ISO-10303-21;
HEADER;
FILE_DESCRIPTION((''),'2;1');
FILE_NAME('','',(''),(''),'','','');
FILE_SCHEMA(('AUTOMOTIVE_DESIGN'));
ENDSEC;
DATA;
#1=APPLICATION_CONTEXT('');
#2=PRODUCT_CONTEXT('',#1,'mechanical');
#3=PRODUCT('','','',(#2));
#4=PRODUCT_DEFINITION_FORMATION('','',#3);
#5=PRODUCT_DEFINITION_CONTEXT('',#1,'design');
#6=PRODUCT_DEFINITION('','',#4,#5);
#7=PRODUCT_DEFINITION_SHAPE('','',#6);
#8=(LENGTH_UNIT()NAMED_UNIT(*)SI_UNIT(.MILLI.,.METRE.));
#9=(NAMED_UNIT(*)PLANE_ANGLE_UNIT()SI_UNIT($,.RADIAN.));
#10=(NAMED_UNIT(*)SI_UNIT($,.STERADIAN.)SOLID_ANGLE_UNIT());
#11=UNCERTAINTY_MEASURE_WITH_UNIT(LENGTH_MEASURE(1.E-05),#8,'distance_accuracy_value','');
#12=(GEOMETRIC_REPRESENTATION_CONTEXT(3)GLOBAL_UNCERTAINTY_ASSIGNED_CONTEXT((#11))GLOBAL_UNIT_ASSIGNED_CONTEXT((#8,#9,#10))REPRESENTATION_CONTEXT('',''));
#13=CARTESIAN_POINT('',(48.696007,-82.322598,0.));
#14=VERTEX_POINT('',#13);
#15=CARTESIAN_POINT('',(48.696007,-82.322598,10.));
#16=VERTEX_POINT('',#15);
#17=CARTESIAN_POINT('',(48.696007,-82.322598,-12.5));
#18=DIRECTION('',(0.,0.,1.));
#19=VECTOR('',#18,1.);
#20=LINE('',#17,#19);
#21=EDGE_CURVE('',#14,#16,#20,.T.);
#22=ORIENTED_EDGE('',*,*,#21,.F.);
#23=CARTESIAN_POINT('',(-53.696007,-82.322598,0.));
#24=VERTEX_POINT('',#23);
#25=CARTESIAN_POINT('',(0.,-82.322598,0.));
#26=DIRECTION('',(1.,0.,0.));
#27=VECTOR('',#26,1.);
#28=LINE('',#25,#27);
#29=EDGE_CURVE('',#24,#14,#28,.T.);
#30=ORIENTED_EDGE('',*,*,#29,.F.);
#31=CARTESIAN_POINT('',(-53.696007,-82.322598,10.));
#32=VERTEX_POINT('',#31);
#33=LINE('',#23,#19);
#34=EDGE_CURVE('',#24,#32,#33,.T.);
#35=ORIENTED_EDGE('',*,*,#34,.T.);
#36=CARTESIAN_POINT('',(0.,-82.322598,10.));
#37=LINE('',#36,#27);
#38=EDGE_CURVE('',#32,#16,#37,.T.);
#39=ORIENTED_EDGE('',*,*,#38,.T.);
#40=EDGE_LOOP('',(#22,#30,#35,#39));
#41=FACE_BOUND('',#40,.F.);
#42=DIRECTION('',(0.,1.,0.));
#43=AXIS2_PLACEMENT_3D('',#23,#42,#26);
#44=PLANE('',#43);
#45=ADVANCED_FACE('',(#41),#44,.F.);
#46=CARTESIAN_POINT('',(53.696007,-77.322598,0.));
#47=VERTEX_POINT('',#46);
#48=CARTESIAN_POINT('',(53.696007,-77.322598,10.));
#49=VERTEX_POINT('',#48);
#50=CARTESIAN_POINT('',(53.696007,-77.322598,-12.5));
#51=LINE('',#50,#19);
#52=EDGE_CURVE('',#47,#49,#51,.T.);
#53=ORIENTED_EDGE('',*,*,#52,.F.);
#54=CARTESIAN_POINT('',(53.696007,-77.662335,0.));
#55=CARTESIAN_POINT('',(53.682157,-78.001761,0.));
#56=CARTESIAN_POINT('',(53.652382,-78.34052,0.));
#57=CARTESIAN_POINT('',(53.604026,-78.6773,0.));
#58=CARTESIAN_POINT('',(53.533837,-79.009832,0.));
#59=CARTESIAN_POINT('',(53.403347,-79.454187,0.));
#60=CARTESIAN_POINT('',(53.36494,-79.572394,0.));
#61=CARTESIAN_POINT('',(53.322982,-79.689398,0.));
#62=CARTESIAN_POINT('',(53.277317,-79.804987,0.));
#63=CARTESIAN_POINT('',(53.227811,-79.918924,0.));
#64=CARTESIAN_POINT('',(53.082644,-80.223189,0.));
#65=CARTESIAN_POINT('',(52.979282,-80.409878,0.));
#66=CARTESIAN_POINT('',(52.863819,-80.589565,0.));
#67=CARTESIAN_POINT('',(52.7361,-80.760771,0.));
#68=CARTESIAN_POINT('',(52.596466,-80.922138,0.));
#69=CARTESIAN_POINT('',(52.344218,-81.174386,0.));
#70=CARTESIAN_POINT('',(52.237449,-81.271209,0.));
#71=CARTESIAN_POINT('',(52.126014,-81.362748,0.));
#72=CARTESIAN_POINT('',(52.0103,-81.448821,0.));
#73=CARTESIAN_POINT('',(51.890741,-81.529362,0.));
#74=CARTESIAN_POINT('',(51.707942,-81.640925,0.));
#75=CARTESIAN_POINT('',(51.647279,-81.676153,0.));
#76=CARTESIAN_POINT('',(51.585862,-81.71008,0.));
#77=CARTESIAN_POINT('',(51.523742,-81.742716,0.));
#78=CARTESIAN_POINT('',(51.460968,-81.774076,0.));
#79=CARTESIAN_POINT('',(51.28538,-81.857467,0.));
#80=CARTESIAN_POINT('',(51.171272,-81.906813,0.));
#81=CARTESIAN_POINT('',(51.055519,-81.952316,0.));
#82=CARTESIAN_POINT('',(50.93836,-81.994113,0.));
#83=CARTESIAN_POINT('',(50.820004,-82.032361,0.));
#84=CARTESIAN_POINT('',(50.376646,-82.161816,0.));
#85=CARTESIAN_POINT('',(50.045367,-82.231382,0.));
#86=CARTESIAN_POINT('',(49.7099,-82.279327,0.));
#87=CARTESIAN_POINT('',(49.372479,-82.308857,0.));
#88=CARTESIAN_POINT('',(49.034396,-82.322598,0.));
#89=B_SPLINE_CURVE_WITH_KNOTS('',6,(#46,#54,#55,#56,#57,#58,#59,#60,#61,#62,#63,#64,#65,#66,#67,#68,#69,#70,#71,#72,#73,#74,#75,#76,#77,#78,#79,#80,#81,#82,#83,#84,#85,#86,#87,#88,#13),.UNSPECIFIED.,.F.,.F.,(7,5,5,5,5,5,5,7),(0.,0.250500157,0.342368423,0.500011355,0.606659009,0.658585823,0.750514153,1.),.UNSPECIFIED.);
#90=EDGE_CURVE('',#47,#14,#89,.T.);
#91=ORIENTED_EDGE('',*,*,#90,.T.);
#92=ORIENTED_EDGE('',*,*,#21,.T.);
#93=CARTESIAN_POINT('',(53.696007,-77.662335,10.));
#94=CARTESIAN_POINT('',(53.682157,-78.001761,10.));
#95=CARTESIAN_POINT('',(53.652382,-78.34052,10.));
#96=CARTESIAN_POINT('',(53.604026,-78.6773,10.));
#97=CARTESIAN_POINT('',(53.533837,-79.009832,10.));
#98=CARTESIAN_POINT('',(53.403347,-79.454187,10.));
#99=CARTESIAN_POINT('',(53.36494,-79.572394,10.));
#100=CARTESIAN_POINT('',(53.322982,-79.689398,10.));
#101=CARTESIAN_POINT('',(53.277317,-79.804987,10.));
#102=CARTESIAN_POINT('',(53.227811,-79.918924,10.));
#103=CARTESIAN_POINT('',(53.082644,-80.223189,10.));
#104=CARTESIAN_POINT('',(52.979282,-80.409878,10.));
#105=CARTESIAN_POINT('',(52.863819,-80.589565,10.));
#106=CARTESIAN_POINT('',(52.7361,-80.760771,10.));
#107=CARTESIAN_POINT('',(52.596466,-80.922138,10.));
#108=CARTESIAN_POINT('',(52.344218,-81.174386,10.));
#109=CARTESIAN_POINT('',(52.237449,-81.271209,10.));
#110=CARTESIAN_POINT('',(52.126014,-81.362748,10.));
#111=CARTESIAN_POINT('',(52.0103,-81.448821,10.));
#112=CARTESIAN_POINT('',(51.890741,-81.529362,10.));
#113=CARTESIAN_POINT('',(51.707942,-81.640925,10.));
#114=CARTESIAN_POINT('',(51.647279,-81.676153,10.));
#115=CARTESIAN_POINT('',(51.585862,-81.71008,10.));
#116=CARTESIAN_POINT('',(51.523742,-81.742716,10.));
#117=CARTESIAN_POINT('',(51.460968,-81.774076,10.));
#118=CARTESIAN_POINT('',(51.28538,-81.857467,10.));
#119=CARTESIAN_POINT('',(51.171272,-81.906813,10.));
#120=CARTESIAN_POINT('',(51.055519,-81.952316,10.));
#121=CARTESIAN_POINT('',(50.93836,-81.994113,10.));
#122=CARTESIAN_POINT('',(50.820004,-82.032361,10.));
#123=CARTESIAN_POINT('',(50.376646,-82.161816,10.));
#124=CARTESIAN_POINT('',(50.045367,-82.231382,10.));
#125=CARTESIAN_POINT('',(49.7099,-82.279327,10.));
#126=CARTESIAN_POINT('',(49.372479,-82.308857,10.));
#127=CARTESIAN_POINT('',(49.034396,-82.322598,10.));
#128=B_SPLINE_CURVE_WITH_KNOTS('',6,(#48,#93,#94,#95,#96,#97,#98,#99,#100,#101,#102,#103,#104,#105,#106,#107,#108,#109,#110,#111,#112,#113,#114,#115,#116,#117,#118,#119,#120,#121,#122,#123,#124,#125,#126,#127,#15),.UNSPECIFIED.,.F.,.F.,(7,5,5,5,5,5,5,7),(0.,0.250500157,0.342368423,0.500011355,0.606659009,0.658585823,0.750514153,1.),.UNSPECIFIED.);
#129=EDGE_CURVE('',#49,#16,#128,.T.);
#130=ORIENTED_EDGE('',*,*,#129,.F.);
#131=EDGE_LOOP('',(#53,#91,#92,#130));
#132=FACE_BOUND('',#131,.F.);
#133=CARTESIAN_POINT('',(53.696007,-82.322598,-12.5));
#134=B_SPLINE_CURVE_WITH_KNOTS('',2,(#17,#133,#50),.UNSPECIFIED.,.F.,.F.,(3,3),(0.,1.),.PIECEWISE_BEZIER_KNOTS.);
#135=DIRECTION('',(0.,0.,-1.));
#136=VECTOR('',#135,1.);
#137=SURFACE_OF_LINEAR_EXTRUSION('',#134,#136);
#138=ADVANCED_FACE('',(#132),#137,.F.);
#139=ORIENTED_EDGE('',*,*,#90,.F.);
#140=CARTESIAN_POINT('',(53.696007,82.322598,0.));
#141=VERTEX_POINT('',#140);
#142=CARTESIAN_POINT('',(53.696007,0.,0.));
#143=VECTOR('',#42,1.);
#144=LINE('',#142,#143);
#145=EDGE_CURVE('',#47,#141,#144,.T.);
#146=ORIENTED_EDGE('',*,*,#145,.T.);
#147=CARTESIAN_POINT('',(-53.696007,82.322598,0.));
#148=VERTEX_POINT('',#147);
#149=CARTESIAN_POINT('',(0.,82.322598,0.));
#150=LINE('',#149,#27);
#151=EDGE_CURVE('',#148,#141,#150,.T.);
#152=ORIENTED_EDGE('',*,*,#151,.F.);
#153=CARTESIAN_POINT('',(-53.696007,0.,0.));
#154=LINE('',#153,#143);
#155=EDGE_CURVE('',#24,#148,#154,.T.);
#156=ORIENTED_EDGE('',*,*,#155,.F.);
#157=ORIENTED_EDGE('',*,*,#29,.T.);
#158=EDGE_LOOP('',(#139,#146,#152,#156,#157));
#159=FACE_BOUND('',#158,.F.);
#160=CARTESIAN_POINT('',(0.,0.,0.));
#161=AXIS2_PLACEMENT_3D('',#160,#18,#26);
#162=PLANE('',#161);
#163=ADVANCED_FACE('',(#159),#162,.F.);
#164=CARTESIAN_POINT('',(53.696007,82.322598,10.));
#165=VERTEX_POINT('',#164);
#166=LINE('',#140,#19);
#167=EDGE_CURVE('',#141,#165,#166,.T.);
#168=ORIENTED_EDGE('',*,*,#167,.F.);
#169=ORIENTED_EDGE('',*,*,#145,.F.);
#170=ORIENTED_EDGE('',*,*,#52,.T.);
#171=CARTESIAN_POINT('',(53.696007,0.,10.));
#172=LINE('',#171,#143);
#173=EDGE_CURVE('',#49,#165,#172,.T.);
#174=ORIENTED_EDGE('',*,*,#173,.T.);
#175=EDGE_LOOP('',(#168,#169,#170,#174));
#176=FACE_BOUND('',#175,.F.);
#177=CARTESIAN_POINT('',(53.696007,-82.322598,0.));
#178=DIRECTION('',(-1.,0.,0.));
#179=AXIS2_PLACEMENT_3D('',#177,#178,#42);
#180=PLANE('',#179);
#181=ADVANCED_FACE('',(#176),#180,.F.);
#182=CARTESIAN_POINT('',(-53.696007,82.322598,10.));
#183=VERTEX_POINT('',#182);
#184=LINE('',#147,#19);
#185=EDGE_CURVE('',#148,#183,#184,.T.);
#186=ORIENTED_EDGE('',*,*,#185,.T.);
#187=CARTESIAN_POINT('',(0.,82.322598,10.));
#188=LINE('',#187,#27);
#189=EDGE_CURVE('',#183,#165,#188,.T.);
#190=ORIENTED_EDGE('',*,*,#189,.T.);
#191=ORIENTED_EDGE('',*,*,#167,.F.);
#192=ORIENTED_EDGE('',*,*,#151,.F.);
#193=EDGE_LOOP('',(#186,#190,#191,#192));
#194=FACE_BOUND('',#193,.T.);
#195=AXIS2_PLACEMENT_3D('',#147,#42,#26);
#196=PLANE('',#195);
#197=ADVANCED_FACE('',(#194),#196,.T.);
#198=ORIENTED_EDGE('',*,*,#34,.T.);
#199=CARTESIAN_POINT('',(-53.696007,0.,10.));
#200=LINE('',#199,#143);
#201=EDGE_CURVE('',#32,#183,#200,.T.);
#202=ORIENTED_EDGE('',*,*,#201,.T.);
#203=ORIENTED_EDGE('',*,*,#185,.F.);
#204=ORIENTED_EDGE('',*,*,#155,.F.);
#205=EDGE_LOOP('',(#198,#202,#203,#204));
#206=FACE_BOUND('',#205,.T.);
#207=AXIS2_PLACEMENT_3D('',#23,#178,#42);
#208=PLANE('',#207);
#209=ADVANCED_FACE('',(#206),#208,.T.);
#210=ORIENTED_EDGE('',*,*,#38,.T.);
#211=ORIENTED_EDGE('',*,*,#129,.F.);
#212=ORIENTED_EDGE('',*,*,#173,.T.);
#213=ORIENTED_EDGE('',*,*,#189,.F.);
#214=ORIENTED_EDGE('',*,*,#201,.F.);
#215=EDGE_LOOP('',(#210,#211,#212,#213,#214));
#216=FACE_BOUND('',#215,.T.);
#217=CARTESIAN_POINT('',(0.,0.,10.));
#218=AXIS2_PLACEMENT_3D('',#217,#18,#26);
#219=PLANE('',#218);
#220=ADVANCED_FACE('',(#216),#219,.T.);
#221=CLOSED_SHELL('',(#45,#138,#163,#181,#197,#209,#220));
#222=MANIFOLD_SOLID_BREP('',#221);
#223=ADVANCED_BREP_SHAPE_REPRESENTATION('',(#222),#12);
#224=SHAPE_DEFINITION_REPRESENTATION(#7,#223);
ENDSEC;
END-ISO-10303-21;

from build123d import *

# Parameters (mm, degrees)
F0_W        = 107.392013073
F0_H        = 164.6451950073
F1_DEPTH    = 10
F2_T1_DEPTH = 35


# Not quite as in the source:
# - a fillet or chamfer that OpenCascade refuses, or shapes differently, is made with other operations: its cross-section is extruded or revolved along the edge and cut away or added


with BuildPart() as f1:
    # F0 (on Top) → F1 (new body)
    with BuildSketch(Plane.XY):
        Rectangle(F0_W, F0_H)
    extrude(amount=F1_DEPTH)

    # F2: fillet of radius 5 on 1 edges, made by hand

    # F2_s2 → F2_t1 (cut)
    with BuildSketch(Plane.XY.offset(-12.5)):
        with BuildLine():
            add(Edge.make_bspline(
                [(48.6960065365, -82.3225975037), (53.6960065365, -82.3225975037), (53.6960065365, -77.3225975037)],
                knots=[0, 0, 0, 1, 1, 1], degree=2, weights=[1, 1, 1]))
            Line((53.6960065365, -77.3225975037), (53.6960065365, -82.3225975037))
            Line((53.6960065365, -82.3225975037), (48.6960065365, -82.3225975037))
        make_face()
    extrude(amount=F2_T1_DEPTH, mode=Mode.SUBTRACT)


solid = f1.part
